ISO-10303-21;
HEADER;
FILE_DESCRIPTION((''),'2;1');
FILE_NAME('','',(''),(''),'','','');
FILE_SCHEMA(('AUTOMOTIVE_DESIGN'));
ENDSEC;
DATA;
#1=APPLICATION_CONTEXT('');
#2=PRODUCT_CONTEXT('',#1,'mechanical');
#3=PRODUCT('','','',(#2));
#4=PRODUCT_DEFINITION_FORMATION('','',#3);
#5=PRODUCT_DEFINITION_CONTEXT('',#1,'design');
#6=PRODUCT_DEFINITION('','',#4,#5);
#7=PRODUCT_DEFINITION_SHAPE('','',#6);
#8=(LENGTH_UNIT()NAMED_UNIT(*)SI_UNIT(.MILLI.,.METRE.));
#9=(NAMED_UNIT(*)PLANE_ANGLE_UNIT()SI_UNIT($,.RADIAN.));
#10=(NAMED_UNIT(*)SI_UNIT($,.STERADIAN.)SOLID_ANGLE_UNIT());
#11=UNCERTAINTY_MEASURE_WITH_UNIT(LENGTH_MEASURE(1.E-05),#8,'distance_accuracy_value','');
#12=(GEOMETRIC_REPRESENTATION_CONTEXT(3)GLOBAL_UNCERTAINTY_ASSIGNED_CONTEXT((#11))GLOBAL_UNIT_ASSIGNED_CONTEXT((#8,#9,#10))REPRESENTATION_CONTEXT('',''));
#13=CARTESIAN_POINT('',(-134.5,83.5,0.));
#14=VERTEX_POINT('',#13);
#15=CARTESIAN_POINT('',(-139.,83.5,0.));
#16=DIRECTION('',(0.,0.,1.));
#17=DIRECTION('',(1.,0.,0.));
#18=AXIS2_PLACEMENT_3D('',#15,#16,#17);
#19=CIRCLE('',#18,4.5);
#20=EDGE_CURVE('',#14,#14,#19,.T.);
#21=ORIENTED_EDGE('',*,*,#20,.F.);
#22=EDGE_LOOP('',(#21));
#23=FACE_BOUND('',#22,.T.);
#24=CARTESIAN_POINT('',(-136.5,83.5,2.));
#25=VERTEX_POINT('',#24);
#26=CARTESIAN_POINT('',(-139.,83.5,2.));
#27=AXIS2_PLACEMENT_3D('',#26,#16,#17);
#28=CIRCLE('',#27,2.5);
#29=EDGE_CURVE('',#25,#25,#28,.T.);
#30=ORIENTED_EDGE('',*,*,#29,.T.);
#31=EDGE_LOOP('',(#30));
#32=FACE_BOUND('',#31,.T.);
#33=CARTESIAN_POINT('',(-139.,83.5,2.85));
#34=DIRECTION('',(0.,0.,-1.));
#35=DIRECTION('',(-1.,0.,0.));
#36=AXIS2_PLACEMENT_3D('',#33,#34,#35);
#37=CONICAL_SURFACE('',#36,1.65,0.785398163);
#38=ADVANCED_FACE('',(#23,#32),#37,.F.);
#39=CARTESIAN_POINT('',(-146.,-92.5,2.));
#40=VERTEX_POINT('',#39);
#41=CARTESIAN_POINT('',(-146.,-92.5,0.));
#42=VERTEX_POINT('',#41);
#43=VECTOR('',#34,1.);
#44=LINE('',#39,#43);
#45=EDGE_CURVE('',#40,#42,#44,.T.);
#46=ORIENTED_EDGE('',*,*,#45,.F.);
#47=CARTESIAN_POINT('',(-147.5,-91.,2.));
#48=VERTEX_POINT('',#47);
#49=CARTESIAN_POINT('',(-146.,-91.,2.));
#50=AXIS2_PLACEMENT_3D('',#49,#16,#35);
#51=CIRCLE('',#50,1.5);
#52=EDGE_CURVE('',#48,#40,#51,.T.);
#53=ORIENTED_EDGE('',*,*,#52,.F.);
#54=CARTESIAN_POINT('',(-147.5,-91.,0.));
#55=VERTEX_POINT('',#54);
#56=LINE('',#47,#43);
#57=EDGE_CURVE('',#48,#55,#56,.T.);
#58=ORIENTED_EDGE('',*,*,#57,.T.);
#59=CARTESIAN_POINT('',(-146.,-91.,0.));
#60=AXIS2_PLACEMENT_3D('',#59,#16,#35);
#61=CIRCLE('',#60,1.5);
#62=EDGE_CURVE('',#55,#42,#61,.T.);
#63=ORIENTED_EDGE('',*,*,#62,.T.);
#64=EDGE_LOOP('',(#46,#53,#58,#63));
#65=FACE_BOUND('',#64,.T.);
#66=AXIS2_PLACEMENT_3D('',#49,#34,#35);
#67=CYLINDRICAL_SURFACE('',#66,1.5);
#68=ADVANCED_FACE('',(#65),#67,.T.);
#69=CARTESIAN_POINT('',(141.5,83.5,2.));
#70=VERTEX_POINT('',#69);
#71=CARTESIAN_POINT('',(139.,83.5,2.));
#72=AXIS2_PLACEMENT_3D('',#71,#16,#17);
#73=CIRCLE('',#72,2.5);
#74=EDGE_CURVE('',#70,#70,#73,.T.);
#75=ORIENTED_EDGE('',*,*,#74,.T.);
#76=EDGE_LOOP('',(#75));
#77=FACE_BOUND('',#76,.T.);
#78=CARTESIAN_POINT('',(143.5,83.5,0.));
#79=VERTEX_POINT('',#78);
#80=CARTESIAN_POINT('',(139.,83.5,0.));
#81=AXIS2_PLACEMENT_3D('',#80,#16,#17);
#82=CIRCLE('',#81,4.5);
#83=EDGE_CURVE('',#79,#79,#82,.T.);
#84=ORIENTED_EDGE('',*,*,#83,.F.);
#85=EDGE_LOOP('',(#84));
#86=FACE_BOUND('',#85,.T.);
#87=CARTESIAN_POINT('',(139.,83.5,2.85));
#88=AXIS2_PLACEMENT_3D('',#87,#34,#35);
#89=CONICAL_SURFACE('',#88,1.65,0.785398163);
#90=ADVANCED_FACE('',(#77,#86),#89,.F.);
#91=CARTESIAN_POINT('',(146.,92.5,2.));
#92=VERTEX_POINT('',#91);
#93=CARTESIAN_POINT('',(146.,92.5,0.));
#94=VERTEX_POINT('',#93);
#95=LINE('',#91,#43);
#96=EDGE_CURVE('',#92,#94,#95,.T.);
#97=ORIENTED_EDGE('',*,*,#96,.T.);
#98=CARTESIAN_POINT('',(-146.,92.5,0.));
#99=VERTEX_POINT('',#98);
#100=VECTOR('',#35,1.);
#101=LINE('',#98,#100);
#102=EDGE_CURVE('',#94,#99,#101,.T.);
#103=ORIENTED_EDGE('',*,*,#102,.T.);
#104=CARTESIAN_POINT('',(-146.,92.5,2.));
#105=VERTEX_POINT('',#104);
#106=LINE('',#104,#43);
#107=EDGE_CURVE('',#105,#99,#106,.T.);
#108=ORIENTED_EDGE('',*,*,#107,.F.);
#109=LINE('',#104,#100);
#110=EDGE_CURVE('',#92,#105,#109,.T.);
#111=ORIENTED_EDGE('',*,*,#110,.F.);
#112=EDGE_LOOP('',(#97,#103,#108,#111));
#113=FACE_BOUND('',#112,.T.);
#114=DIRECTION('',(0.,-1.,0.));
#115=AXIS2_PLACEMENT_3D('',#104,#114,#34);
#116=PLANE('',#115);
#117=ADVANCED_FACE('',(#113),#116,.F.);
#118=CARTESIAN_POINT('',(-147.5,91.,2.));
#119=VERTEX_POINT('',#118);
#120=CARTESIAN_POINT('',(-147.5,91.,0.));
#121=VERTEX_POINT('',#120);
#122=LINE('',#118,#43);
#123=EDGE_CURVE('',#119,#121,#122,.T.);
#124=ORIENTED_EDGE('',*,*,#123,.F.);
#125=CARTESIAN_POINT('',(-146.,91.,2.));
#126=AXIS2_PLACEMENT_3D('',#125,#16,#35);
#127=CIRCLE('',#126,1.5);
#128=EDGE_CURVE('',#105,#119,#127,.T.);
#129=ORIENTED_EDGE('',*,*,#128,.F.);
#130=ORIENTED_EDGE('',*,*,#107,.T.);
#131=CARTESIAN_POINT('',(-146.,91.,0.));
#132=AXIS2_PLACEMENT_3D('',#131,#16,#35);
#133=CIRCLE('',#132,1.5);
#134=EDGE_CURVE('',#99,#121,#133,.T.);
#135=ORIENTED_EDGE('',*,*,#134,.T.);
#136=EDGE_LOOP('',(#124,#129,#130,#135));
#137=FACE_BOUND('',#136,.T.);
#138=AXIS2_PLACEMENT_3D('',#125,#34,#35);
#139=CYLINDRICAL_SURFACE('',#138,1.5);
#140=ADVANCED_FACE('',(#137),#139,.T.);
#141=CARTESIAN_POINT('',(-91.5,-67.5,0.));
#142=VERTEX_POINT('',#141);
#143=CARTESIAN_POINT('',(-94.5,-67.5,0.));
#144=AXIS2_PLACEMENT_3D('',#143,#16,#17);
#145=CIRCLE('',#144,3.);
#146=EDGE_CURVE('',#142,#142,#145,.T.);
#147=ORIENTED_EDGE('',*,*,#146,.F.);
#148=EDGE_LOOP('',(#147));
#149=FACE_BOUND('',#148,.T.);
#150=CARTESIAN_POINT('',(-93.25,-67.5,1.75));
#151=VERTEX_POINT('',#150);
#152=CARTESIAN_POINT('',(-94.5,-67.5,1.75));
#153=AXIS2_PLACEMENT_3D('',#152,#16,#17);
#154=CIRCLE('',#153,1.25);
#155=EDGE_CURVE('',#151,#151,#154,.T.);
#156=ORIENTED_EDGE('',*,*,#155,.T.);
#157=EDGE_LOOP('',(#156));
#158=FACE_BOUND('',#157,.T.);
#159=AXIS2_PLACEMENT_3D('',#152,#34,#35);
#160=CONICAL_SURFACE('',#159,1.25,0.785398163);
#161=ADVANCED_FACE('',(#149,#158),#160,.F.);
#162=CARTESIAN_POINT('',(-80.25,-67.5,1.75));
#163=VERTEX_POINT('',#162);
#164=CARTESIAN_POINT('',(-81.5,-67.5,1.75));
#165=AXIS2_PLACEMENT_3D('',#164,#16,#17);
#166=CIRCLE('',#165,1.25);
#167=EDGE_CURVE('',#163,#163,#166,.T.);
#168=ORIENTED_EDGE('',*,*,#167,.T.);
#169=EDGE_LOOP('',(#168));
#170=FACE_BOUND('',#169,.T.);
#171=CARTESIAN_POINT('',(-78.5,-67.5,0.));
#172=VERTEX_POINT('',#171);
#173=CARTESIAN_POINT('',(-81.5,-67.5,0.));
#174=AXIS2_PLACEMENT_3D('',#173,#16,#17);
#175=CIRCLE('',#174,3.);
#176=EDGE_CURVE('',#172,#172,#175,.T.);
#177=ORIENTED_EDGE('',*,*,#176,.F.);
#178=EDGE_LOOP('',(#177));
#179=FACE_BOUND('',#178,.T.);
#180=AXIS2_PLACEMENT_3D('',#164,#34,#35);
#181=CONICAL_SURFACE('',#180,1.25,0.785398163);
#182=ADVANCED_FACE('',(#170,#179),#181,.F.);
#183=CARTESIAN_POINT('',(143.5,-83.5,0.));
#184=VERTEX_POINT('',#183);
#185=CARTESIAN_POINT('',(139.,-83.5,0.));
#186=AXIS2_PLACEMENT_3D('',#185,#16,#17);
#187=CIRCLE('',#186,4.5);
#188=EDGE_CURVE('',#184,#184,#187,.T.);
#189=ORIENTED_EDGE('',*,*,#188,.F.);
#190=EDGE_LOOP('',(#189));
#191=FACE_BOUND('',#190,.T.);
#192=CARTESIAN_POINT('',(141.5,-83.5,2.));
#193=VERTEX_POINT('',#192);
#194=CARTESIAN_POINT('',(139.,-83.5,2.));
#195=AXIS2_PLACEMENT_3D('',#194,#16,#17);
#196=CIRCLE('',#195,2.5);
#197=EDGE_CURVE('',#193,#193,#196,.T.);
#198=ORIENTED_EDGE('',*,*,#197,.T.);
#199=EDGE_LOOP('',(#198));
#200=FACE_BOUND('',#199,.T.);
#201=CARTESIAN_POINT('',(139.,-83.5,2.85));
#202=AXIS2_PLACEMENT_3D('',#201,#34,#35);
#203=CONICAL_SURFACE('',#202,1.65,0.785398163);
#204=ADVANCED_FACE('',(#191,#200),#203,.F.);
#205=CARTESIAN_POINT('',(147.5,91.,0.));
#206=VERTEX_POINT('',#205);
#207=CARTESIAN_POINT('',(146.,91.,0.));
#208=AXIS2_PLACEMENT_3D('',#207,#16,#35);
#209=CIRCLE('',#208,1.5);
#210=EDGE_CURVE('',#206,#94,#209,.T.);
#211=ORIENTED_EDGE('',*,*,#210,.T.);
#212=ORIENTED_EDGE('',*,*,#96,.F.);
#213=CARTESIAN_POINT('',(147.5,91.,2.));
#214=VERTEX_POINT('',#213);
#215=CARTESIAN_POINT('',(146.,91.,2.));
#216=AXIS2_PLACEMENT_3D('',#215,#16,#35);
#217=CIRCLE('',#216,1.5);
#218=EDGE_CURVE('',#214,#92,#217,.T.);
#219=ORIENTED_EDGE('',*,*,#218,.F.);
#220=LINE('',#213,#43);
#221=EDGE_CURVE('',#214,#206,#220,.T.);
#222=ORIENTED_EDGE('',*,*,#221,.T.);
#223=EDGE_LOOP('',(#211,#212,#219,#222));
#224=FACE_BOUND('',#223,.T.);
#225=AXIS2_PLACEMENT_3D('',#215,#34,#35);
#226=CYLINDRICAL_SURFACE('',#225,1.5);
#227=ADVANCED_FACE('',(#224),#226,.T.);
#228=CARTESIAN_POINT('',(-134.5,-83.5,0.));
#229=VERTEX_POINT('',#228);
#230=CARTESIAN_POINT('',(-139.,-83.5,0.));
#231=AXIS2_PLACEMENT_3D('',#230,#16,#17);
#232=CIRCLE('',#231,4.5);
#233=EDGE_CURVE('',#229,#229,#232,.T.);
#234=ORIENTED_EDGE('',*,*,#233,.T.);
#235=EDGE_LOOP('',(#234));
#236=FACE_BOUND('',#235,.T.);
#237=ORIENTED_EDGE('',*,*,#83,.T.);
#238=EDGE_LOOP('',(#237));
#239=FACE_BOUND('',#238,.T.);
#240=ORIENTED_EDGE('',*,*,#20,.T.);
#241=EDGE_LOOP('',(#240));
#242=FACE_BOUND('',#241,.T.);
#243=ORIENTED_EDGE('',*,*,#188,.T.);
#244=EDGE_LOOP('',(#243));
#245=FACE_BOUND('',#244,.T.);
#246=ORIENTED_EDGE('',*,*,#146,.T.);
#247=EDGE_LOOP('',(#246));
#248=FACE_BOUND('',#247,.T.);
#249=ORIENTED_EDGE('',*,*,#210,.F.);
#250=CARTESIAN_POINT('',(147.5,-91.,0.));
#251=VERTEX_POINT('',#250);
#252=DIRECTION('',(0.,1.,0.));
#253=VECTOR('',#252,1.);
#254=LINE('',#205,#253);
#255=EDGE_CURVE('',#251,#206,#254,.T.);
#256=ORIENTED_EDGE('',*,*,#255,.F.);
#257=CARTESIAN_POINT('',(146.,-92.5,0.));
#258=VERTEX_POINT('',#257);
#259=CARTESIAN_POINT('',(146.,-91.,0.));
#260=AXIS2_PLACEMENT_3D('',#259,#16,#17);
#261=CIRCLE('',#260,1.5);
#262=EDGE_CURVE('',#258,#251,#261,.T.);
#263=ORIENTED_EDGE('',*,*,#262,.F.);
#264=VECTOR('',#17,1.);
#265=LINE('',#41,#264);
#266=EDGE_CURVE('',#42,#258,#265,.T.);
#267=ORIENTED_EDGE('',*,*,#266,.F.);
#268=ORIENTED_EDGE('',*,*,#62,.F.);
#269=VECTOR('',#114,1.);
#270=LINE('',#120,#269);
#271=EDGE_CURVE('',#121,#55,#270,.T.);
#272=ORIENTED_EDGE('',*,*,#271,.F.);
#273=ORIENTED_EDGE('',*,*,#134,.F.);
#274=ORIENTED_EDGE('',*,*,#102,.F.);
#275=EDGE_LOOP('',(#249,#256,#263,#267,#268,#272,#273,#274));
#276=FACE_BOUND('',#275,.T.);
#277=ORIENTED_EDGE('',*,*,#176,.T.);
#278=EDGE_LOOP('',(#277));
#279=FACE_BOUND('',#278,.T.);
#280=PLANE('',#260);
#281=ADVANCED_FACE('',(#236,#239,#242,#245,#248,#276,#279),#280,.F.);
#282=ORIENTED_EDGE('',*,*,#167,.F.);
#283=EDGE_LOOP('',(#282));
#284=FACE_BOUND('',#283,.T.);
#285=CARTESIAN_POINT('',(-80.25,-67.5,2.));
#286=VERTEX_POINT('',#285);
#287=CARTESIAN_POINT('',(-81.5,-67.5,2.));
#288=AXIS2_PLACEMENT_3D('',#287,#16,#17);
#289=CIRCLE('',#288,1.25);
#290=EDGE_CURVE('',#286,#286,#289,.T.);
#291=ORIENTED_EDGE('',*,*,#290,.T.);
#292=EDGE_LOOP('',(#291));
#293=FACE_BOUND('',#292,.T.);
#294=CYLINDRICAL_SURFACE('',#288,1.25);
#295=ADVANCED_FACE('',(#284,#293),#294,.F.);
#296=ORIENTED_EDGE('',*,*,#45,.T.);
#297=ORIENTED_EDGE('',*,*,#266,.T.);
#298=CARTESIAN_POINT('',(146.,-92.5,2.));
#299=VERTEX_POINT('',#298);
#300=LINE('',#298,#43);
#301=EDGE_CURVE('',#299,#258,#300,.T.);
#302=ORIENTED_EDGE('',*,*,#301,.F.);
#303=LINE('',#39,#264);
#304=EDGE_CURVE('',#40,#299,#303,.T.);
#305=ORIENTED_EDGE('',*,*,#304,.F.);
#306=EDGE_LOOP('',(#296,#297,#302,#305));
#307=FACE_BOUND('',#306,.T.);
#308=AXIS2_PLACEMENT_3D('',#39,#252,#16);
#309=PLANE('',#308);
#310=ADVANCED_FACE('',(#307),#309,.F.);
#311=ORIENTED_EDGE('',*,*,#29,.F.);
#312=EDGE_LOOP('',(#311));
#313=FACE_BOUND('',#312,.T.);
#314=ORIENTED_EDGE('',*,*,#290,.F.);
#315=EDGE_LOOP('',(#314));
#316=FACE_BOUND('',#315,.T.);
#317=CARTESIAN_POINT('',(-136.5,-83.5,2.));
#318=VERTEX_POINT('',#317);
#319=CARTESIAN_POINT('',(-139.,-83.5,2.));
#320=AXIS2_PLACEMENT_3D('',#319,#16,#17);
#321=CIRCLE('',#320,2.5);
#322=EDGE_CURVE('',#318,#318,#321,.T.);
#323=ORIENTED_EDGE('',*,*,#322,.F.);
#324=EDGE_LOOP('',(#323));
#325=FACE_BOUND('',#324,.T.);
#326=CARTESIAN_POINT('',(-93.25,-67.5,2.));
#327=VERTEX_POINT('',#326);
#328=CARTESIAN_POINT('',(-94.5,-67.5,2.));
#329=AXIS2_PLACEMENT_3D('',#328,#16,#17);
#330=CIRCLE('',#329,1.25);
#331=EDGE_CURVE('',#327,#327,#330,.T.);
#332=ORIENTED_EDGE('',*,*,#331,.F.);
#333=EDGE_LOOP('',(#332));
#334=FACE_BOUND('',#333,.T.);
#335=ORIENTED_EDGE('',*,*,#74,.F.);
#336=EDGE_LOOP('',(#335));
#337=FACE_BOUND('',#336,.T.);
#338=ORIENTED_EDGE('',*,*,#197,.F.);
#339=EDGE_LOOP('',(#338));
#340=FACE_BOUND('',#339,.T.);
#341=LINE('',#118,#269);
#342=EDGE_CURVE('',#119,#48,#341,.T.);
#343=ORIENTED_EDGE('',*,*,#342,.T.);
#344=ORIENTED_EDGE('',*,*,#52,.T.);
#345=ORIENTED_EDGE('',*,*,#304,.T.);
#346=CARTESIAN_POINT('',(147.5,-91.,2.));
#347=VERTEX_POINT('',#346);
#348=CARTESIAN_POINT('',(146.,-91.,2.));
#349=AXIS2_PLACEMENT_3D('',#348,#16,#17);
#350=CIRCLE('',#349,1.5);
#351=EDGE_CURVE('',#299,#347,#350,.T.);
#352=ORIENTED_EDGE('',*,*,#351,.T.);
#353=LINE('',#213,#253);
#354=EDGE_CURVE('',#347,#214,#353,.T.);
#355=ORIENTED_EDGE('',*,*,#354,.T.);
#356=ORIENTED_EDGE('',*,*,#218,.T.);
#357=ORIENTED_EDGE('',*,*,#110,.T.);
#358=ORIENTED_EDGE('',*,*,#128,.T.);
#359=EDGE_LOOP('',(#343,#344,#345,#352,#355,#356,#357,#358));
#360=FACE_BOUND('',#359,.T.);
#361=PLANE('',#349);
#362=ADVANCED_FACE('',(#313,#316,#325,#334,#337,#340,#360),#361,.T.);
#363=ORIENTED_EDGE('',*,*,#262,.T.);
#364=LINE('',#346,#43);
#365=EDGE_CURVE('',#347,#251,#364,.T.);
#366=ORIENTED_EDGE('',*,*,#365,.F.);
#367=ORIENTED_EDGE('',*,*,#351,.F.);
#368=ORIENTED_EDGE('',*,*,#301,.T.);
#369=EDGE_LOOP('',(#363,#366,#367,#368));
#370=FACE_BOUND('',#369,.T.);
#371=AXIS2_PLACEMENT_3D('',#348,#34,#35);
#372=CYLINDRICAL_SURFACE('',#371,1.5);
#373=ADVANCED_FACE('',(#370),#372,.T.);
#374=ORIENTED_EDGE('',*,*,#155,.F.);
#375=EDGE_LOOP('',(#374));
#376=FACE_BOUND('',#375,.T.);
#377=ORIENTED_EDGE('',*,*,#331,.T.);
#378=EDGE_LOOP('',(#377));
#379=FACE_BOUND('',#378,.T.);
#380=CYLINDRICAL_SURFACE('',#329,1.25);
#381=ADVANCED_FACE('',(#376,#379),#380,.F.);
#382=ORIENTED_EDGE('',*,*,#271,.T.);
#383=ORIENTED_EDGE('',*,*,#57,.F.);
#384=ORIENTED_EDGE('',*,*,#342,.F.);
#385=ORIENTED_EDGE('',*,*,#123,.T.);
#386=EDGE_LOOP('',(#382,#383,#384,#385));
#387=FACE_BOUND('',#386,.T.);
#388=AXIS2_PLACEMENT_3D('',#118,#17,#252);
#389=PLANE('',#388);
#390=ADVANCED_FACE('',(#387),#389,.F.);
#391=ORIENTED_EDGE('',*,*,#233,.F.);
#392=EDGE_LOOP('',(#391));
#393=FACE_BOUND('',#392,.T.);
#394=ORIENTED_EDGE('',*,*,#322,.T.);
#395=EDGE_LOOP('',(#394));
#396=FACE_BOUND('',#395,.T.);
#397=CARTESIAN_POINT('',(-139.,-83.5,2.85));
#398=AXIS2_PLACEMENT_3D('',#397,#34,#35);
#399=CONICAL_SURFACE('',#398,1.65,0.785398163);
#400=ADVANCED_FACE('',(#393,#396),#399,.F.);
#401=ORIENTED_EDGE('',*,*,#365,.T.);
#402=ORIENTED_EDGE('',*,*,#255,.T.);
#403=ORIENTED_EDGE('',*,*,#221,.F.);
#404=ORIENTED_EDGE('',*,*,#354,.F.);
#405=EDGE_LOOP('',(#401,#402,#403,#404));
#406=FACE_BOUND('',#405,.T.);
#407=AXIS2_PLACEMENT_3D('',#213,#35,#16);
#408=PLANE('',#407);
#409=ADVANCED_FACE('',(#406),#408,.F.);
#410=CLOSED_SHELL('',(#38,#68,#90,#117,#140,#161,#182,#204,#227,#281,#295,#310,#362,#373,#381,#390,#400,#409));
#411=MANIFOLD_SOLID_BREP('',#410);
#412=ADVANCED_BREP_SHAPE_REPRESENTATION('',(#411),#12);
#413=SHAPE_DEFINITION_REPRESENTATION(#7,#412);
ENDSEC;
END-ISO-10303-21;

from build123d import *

# Parameters (mm, degrees)
BASE_FLANGE1_DEPTH             = 2
FURO_ROSCADO_DE_M31_AT_2_COUNT = 2
FURO_ROSCADO_DE_M31_AT_2_PITCH = 13


# Sheet-metal steps are written as plain solids
with BuildPart() as part:
    # Sketch1 → Base-Flange1 (new body)
    with BuildSketch(Plane.XY):
        with BuildLine():
            Line((-146, 92.5), (146, 92.5))
            ThreePointArc((146, 92.5), (147.060660172, 92.060660172), (147.5, 91))
            Line((147.5, 91), (147.5, -91))
            ThreePointArc((147.5, -91), (147.060660172, -92.060660172), (146, -92.5))
            Line((146, -92.5), (-146, -92.5))
            ThreePointArc((-146, -92.5), (-147.060660172, -92.060660172), (-147.5, -91))
            Line((-147.5, -91), (-147.5, 91))
            ThreePointArc((-147.5, 91), (-147.060660172, 92.060660172), (-146, 92.5))
        make_face()
    extrude(amount=BASE_FLANGE1_DEPTH)

    # Esboço3 → Furo roscado de M41 (revolve, cut)
    with BuildSketch(Plane(origin=(-139, 83.5, 2), x_dir=(0, -1, 0), z_dir=(1, 0, 0))):
        Polygon((0, 0), (0, 2), (4.5, 2), (1.65, -0.85), (1.65, 0), align=None)
    furo_roscado_de_m41 = revolve(axis=Axis((-139, 83.5, 8.35), (0, 0, -1)), mode=Mode.SUBTRACT)

    # Espelhar1: Furo roscado de M41 across plane
    add(furo_roscado_de_m41.mirror(Plane.ZX), mode=Mode.SUBTRACT)

    # Espelhar2: Furo roscado de M41 across plane
    add(furo_roscado_de_m41.mirror(Plane(origin=(0, 0, 0), x_dir=(0, 0, 1), z_dir=(1, 0, 0))), mode=Mode.SUBTRACT)

    # Espelhar2 copy 1 sketch → Espelhar2 copy 1 (revolve, cut)
    with BuildSketch(Plane(origin=(139, -83.5, 2), x_dir=(0, 1, 0), z_dir=(-1, 0, 0))):
        Polygon((0, 0), (0, 2), (4.5, 2), (1.65, -0.85), (1.65, 0), align=None)
    revolve(axis=Axis((139, -83.5, 8.35), (0, 0, -1)), mode=Mode.SUBTRACT)

    # Esboço5 → Furo roscado de M31 (revolve, cut)
    with BuildSketch(Plane(origin=(-94.5, -67.5, 2), x_dir=(0, -1, 0), z_dir=(1, 0, 0))):
        Polygon((0, 0), (0, 2), (3, 2), (1.25, 0.25), (1.25, 0), align=None)
    furo_roscado_de_m31 = revolve(axis=Axis((-94.5, -67.5, 8.35), (0, 0, -1)), mode=Mode.SUBTRACT)

    # Furo roscado de M31 at 2: Furo roscado de M31 ×2
    with Locations(*[(i * FURO_ROSCADO_DE_M31_AT_2_PITCH, 0, 0) for i in range(1, FURO_ROSCADO_DE_M31_AT_2_COUNT)]):
        add(furo_roscado_de_m31, mode=Mode.SUBTRACT)


solid = part.part
